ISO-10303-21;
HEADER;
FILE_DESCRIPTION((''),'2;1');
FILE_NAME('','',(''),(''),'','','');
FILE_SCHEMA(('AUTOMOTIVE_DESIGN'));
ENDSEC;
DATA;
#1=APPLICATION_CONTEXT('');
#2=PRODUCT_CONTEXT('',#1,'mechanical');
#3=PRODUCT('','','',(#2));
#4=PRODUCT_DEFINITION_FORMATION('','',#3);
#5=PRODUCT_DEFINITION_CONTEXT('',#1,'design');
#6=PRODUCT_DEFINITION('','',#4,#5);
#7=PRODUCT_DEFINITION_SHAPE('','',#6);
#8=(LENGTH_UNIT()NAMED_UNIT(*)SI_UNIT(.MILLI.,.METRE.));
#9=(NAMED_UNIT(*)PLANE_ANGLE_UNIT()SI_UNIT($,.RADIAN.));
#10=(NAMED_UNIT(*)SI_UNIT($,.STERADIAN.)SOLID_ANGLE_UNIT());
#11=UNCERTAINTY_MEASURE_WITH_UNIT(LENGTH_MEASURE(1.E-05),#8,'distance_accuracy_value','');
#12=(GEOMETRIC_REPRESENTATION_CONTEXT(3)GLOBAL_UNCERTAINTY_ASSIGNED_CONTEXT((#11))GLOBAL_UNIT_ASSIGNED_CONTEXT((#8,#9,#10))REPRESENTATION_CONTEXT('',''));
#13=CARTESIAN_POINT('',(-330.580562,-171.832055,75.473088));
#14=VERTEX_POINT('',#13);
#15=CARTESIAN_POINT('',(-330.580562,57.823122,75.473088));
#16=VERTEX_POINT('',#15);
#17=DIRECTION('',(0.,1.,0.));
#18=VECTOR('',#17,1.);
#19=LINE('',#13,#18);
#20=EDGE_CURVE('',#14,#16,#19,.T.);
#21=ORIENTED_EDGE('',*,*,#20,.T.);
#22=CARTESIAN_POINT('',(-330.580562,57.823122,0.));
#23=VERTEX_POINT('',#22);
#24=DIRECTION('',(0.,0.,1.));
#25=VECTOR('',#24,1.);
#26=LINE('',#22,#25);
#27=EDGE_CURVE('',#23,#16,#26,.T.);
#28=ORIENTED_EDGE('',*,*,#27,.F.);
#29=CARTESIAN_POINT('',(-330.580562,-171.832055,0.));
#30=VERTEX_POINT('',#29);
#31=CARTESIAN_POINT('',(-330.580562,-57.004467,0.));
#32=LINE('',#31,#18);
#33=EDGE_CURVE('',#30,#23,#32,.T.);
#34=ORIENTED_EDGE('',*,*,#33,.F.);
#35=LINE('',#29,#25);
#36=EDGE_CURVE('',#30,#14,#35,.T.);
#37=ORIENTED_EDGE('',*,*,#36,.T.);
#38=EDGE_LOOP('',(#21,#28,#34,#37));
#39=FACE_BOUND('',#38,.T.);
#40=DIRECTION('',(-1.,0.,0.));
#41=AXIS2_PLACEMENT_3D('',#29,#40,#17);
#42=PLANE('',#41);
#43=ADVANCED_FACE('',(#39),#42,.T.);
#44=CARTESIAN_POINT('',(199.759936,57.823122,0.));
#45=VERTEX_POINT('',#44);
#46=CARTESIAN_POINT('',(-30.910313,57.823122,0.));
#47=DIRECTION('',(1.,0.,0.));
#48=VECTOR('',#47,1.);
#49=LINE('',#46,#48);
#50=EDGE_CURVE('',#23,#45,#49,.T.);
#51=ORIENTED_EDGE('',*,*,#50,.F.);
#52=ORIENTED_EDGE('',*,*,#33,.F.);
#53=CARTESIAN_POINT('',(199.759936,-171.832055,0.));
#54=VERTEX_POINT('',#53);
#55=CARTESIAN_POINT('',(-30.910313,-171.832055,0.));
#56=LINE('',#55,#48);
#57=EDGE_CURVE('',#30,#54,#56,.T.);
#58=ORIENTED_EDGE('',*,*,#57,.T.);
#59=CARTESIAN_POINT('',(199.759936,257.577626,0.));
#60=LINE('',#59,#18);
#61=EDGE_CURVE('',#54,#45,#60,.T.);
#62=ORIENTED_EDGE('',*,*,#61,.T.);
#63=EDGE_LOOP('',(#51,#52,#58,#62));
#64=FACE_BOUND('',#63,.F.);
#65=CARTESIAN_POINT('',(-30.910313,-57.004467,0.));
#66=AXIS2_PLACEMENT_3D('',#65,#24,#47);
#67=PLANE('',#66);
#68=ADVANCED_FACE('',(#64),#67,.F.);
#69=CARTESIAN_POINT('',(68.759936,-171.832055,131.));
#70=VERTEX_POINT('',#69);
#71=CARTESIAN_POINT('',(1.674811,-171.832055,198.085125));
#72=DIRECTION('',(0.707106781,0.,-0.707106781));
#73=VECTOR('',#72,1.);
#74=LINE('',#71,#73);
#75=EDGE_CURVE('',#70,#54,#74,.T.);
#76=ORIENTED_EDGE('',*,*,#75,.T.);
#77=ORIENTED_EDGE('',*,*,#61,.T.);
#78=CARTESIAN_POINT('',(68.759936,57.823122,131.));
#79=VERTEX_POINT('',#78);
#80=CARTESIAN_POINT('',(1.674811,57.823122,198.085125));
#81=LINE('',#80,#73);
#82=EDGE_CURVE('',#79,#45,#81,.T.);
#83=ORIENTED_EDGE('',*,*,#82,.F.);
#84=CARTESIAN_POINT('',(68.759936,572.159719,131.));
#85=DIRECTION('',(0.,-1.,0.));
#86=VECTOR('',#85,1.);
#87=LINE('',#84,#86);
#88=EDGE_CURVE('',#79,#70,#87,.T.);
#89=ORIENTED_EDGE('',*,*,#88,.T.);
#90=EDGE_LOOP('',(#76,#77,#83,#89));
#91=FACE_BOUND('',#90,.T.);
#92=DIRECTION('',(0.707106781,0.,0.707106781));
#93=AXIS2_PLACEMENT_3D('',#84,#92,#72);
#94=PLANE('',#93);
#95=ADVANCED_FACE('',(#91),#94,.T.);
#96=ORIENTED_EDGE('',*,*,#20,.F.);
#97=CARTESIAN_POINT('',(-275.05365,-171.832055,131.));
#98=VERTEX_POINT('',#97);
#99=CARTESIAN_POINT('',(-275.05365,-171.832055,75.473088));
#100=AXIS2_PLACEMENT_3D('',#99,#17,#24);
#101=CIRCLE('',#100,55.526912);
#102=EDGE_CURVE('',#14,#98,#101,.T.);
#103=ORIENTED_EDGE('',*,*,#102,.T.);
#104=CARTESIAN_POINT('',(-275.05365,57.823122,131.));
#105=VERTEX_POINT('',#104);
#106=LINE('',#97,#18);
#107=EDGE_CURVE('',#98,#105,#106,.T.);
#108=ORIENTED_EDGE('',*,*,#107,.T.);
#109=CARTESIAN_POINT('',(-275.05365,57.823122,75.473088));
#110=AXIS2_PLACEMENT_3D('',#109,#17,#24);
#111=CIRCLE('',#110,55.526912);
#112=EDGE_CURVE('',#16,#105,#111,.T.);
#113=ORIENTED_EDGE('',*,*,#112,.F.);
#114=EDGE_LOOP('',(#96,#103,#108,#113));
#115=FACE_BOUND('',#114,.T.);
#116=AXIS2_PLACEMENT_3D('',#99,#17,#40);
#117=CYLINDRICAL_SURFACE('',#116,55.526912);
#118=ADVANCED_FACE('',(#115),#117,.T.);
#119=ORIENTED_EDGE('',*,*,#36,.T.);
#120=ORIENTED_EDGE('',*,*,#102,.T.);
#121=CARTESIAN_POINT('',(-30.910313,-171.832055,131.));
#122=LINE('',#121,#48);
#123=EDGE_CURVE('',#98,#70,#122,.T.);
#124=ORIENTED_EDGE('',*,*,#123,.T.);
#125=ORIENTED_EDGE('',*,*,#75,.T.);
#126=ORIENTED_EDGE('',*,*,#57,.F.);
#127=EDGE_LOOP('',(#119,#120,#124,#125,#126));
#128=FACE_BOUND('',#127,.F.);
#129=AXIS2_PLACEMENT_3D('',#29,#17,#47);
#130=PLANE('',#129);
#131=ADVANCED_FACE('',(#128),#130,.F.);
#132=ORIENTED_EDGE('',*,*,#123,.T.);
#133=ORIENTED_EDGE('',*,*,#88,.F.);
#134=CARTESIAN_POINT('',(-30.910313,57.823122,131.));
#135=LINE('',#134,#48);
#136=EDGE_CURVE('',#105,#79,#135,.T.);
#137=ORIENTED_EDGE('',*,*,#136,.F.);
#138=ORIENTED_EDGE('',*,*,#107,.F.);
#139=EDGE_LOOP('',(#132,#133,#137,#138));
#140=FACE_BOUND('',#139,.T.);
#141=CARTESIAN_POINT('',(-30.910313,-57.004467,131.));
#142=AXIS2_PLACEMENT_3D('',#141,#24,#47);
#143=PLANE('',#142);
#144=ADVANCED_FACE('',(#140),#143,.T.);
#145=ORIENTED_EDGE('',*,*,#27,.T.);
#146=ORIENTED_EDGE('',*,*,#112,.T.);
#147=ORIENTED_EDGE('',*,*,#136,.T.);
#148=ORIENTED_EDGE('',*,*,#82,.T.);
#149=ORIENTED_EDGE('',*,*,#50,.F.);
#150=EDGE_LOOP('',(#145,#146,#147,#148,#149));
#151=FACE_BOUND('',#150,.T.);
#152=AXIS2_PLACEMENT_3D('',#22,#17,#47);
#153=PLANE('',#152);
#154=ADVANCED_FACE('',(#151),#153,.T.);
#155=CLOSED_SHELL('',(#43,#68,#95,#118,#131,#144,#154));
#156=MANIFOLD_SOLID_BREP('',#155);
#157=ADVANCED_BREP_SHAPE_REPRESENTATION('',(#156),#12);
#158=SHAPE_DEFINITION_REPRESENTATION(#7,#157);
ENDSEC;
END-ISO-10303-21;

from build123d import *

# Parameters (mm, degrees)
F0_W        = 599.3404984474
F0_H        = 229.6551764011
F1_DEPTH    = 131
F2_R        = 55.5269119346
F3_T1_DEPTH = 1258.3283715875


# Not quite as in the source:
# - a fillet or chamfer that OpenCascade refuses, or shapes differently, is made with other operations: its cross-section is extruded or revolved along the edge and cut away or added


with BuildPart() as f1:
    # F0 (on Top) → F1 (new body)
    with BuildSketch(Plane.XY):
        with Locations((-30.9103131294, -57.0044666529)):
            Rectangle(F0_W, F0_H)
    extrude(amount=F1_DEPTH)

    # F2
    f2_edges = [f1.edges().sort_by_distance(p)[0] for p in [
        (-330.580562, -57.004467, 131),
    ]]
    fillet(f2_edges, radius=F2_R)

    # F3: chamfer of 200 on 1 edges, made by hand

    # F3_s2 → F3_t1 (cut)
    with BuildSketch(Plane.XZ.offset(-572.1597191409)):
        Polygon((68.7599360943, 131), (268.7599360943, -69), (268.7599360943, 131), align=None)
    extrude(amount=F3_T1_DEPTH, mode=Mode.SUBTRACT)


solid = f1.part
